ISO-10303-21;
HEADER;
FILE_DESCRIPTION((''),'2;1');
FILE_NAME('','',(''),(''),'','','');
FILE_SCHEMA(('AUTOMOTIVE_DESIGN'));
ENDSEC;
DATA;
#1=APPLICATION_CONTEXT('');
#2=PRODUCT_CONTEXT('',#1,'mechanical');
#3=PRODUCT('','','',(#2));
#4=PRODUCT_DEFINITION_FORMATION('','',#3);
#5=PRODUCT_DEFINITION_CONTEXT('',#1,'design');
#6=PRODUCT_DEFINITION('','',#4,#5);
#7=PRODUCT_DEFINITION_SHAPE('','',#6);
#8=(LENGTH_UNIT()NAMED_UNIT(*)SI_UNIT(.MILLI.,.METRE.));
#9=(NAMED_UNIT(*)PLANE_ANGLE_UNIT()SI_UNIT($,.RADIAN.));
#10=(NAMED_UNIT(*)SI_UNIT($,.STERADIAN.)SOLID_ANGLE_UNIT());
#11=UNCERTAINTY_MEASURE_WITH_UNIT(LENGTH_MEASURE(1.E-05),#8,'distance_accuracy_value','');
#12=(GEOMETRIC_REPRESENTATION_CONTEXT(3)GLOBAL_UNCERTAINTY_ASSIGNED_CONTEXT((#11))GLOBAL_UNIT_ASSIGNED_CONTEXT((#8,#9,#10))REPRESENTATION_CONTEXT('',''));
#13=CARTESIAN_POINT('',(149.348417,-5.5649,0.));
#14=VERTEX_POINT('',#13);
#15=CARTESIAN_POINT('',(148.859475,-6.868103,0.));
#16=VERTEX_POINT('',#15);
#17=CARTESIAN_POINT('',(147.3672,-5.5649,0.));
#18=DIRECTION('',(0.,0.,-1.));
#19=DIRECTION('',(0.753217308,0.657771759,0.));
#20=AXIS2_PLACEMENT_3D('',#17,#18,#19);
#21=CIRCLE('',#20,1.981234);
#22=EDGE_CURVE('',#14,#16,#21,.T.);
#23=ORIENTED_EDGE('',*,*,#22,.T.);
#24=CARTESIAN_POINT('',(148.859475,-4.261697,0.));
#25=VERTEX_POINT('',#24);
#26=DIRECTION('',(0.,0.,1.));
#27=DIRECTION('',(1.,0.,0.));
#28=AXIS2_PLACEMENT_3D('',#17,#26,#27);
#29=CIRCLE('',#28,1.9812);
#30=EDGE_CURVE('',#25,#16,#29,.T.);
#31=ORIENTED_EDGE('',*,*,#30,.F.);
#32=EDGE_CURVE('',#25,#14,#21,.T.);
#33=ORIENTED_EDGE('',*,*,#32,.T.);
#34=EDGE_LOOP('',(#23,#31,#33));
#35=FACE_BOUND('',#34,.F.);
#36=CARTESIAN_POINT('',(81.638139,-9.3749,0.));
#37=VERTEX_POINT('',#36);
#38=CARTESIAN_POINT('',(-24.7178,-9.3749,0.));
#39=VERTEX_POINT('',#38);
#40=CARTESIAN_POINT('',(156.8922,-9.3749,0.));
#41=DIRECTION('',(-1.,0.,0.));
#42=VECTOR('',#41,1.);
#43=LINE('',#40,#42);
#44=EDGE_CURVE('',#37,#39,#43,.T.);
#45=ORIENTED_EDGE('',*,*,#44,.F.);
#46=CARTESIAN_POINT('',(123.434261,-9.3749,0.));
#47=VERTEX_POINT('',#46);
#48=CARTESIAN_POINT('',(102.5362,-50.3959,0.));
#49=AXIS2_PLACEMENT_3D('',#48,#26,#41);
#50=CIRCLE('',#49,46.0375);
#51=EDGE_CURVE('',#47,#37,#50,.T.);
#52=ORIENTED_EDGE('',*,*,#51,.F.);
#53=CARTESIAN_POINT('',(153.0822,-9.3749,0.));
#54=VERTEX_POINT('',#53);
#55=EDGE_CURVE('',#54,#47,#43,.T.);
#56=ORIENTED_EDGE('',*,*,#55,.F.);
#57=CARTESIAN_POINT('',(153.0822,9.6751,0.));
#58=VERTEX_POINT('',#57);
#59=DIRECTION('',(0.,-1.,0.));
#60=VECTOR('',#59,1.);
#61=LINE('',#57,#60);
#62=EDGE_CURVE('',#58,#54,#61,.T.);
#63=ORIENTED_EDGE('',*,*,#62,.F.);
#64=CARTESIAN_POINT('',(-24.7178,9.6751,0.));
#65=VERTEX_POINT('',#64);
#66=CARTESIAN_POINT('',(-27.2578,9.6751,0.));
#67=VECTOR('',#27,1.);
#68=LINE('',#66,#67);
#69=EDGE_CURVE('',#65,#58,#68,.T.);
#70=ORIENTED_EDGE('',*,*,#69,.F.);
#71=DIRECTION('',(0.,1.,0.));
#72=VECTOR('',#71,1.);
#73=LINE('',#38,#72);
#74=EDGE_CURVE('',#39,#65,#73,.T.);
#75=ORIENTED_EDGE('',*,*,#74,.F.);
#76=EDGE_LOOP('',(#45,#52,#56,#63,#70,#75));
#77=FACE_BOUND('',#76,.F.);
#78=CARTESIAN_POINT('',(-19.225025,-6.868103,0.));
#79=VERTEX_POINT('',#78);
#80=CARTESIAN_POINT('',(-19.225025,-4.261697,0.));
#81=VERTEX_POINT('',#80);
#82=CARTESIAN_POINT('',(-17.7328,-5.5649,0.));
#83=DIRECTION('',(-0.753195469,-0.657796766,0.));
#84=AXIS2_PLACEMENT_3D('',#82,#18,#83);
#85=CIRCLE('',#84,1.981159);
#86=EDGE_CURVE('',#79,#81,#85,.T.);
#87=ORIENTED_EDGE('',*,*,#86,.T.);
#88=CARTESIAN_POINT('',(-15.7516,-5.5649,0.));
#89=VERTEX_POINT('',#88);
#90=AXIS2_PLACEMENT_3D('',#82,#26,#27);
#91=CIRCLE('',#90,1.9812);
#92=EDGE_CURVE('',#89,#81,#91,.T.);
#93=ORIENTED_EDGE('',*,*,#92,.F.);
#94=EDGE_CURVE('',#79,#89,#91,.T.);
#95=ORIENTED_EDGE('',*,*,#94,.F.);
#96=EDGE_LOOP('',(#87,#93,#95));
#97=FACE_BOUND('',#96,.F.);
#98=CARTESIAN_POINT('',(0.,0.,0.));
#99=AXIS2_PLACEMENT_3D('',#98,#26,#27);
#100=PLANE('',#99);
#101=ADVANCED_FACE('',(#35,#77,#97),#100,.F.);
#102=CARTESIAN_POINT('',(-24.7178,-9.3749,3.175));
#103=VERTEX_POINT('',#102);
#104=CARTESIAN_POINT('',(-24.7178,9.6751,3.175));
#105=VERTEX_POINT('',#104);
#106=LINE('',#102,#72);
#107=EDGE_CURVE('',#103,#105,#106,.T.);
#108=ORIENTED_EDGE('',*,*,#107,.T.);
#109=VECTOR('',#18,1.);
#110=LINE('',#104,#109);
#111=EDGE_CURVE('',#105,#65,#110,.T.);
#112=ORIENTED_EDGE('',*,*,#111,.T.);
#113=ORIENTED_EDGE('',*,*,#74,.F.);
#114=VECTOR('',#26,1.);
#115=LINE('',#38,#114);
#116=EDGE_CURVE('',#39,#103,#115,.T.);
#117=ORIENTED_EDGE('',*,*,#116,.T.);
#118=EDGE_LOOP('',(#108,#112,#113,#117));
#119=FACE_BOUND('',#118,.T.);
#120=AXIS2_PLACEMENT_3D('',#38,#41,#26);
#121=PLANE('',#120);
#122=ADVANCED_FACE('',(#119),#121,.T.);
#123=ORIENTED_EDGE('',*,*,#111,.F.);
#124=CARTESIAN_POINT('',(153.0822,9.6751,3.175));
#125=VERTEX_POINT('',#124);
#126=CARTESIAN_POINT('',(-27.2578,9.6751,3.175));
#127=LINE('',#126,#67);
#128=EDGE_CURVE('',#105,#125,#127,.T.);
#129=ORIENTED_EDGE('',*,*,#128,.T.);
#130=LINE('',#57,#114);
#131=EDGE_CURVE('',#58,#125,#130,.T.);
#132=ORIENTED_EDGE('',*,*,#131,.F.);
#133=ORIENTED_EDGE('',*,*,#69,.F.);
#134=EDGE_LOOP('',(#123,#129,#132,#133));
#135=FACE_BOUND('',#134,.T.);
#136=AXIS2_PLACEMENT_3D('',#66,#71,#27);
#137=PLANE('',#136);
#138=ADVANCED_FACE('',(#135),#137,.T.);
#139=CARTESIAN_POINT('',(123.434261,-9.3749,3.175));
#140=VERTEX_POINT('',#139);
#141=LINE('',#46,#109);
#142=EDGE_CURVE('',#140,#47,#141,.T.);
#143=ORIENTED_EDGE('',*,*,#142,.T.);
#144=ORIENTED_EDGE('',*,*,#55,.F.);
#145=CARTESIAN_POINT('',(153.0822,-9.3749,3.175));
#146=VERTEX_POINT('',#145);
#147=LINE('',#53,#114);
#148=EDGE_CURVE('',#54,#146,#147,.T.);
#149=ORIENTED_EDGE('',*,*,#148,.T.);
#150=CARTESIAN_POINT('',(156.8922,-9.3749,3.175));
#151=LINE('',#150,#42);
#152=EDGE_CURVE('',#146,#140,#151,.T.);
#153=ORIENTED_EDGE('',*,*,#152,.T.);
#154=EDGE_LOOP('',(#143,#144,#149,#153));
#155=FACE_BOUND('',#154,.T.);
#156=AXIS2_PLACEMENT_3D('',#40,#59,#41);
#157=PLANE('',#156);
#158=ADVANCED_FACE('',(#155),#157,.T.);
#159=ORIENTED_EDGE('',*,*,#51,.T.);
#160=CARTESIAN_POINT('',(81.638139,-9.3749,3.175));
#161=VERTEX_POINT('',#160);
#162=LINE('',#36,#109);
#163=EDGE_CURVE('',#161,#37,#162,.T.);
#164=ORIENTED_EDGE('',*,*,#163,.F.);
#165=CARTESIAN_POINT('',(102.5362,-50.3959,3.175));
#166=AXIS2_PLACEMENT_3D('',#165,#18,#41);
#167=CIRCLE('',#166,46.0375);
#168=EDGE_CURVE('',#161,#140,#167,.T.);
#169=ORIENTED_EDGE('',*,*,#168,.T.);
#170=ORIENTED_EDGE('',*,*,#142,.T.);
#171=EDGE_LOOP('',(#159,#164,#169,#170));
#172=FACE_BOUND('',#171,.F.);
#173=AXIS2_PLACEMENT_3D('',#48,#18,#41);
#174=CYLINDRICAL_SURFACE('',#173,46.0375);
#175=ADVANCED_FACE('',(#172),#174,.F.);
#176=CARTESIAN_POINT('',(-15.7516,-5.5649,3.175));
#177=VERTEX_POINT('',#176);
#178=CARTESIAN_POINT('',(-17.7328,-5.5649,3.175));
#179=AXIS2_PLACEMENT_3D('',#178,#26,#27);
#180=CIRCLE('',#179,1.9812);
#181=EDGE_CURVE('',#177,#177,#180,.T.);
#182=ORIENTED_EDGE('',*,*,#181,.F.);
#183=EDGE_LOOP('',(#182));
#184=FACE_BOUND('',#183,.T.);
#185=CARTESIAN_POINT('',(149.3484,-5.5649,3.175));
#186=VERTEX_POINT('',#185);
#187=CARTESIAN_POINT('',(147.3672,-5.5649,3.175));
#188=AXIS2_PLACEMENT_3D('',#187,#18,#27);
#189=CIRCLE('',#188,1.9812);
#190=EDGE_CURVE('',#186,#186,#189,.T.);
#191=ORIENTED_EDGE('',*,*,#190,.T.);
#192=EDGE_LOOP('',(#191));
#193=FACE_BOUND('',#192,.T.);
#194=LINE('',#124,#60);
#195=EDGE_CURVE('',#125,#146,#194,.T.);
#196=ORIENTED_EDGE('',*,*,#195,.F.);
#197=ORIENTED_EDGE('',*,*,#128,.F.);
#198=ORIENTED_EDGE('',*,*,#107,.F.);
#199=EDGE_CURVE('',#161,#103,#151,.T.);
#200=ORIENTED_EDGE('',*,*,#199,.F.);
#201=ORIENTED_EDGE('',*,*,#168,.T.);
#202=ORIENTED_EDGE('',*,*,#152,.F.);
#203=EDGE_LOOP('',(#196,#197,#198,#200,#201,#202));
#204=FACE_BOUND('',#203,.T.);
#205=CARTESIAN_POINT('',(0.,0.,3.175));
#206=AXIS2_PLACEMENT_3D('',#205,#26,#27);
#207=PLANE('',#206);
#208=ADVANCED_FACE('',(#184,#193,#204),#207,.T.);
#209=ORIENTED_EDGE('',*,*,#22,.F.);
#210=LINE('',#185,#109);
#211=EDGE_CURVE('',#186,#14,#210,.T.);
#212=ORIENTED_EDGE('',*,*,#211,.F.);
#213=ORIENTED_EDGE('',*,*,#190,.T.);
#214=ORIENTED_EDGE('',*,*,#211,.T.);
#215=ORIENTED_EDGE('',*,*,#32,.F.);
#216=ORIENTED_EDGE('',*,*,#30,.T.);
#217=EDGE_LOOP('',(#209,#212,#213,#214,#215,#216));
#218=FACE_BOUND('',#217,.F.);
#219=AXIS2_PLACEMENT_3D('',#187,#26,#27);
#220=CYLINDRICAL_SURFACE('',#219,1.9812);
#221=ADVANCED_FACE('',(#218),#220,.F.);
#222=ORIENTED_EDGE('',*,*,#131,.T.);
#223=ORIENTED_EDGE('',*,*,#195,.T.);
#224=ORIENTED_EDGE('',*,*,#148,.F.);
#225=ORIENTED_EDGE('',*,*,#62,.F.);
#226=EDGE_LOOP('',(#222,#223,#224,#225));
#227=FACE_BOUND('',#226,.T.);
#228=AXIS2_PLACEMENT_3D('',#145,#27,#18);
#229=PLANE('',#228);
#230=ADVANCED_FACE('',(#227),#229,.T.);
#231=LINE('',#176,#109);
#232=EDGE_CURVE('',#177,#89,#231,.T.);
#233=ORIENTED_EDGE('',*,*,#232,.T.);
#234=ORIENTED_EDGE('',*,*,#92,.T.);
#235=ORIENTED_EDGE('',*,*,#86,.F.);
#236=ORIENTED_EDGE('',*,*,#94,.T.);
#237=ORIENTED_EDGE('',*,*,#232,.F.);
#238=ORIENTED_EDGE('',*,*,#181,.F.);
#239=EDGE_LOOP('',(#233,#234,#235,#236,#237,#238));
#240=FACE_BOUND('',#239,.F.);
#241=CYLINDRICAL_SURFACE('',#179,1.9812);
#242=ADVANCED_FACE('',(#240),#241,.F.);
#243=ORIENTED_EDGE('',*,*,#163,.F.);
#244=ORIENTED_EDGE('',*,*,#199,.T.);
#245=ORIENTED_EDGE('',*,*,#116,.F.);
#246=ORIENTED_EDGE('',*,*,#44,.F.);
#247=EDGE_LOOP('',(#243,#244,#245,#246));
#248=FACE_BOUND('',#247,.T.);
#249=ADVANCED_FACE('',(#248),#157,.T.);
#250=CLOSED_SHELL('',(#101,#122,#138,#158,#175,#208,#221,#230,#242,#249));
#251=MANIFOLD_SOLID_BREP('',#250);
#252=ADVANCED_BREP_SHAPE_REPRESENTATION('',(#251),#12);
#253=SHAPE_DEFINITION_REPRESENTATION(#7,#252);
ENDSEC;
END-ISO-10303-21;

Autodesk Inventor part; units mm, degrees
ref_plane "YZ Plane" through (0, 0, 0) normal (1, 0, 0) x (0, 1, 0)
ref_plane "XZ Plane" through (0, 0, 0) normal (0, 1, 0) x (-1, 0, 0)
ref_plane "XY Plane" through (0, 0, 0) normal (0, 0, 1) x (1, 0, 0)
sketch "Sketch1" plane through (0, 0, 0) normal (0, 0, 1) x (1, 0, 0)
  line L0 (-27.2578, 3.3251) -> (156.8922, 3.3251)
  line L1 (156.8922, 3.3251) -> (156.8922, -9.3749)
  line L2 (156.8922, -9.3749) -> (-27.2578, -9.3749)
  line L3 (-27.2578, -9.3749) -> (-27.2578, 3.3251)
  line L4 (64.8172, -3.0249) -> (-20.7173, -3.0249)
  line L5 (-20.7173, -3.0249) -> (150.3517, -3.0249)
  line L6 (-20.7173, -3.0249) -> (-20.7173, -5.5649)
  circle A0 centre (-20.7173, -5.5649) radius 1.9812
  circle A1 centre (150.3517, -5.5649) radius 1.9812
  point P0 (0, 0)
  dimension "d0" = 184.15
  dimension "d1" = 12.7
  dimension "d2" = 85.5345
  dimension "d3" = 171.069
  dimension "d4" = 2.54
  dimension "d5" = 3.9624
extrude "Extrusion1" add sketch "Sketch1" along normal blind 3.175
sketch "Sketch2" plane through (-27.2578, 3.3251, 0) normal (0, 1, 0) x (1, 0, 0)
  line L0 (0, -3.175) -> (184.15, -3.175) projected
  line L1 (184.15, 0) -> (184.15, -3.175) projected
  line L2 (0, 0) -> (184.15, 0) projected
  line L3 (0, 0) -> (0, -3.175) projected
  point P0 (27.2578, 0)
extrude "Extrusion2" add sketch "Sketch2" along normal blind 6.35
sketch "Sketch3" plane through (0, 0, 3.175) normal (0, 0, 1) x (1, 0, 0)
  circle A0 centre (150.3517, -5.5649) radius 1.9812 projected
  circle A1 centre (-20.7173, -5.5649) radius 1.9812 projected
  point P0 (0, 0)
extrude "Extrusion3" add sketch "Sketch3" against normal blind 6.35
sketch "Sketch4" plane through (0, 0, 3.175) normal (0, 0, 1) x (1, 0, 0)
  line L0 (156.8922, -9.3749) -> (-27.2578, -9.3749) projected
  line L1 (64.8172, -9.3749) -> (64.8172, -5.5649)
  line L2 (64.8172, -5.5649) -> (-17.7328, -5.5649)
  circle A0 centre (-17.7328, -5.5649) radius 1.9812
  line L3 (-17.7328, -5.5649) -> (147.3672, -5.5649)
  circle A1 centre (147.3672, -5.5649) radius 1.9812
  point P0 (0, 0)
  dimension "d12" = 3.81
  dimension "d13" = 82.55
  dimension "d14" = 3.9624
  dimension "d15" = 165.1
extrude "Extrusion4" cut sketch "Sketch4" against normal blind 6.35
sketch "Sketch5" plane through (156.8922, -9.3749, 3.175) normal (1, 0, 0) x (0, 0, -1)
  line L0 (0, 19.05) -> (0, 0) projected
  line L1 (3.175, 0) -> (0, 0) projected
  line L2 (3.175, 19.05) -> (3.175, 0) projected
  line L3 (3.175, 19.05) -> (0, 19.05) projected
  point P0 (3.175, 9.3749)
extrude "Extrusion5" cut sketch "Sketch5" against normal blind 3.81
sketch "Sketch6" plane through (-27.2578, -9.3749, 0) normal (-1, 0, 0) x (0, 0, 1)
  line L0 (3.175, 0) -> (3.175, 19.05) projected
  line L1 (3.175, 19.05) -> (0, 19.05) projected
  line L2 (0, 0) -> (0, 19.05) projected
  line L3 (0, 0) -> (3.175, 0) projected
  point P0 (0, 9.3749)
extrude "Extrusion6" cut sketch "Sketch6" against normal blind 2.54
sketch "Sketch7" plane through (0, 0, -3.175) normal (0, 0, -1) x (-1, 0, 0)
  arc A0 (-148.8595, -4.2617) -> (-148.8595, -6.8681) centre (-147.3672, -5.5649) ccw projected
  arc A1 (-148.8595, -4.2617) -> (-148.8595, -6.8681) centre (-150.3517, -5.5649) ccw projected
  point P0 (0, 0)
extrude "Extrusion7" cut sketch "Sketch7" against normal blind 3.175
sketch "Sketch8" plane through (0, 0, -3.175) normal (0, 0, -1) x (-1, 0, 0)
  arc A0 (19.225, -6.8681) -> (19.225, -4.2617) centre (17.7328, -5.5649) ccw projected
  arc A1 (19.225, -6.8681) -> (19.225, -4.2617) centre (20.7173, -5.5649) ccw projected
  point P0 (0, 0)
extrude "Extrusion8" cut sketch "Sketch8" against normal blind 3.175
sketch "Sketch9" plane through (0, 0, 0) normal (0, 0, -1) x (-1, 0, 0)
  line L0 (-153.0822, -9.3749) -> (24.7178, -9.3749) projected
  circle A0 centre (-147.3672, -5.5649) radius 1.9812 projected
  line L1 (-147.3672, -5.5649) -> (-102.5362, -5.5649)
  line L2 (-102.5362, -5.5649) -> (-102.5362, -50.3959)
  circle A1 centre (-102.5362, -50.3959) radius 46.0375
  point P0 (0, 0)
  dimension "d26" = 44.831
  dimension "d27" = 44.831
  dimension "d28" = 92.075
extrude "Extrusion9" cut sketch "Sketch9" against normal blind 25.4 contours A1 L1 L2 L0 | L0 A1 | L2 L1 A1 L0
properties part number "small"
